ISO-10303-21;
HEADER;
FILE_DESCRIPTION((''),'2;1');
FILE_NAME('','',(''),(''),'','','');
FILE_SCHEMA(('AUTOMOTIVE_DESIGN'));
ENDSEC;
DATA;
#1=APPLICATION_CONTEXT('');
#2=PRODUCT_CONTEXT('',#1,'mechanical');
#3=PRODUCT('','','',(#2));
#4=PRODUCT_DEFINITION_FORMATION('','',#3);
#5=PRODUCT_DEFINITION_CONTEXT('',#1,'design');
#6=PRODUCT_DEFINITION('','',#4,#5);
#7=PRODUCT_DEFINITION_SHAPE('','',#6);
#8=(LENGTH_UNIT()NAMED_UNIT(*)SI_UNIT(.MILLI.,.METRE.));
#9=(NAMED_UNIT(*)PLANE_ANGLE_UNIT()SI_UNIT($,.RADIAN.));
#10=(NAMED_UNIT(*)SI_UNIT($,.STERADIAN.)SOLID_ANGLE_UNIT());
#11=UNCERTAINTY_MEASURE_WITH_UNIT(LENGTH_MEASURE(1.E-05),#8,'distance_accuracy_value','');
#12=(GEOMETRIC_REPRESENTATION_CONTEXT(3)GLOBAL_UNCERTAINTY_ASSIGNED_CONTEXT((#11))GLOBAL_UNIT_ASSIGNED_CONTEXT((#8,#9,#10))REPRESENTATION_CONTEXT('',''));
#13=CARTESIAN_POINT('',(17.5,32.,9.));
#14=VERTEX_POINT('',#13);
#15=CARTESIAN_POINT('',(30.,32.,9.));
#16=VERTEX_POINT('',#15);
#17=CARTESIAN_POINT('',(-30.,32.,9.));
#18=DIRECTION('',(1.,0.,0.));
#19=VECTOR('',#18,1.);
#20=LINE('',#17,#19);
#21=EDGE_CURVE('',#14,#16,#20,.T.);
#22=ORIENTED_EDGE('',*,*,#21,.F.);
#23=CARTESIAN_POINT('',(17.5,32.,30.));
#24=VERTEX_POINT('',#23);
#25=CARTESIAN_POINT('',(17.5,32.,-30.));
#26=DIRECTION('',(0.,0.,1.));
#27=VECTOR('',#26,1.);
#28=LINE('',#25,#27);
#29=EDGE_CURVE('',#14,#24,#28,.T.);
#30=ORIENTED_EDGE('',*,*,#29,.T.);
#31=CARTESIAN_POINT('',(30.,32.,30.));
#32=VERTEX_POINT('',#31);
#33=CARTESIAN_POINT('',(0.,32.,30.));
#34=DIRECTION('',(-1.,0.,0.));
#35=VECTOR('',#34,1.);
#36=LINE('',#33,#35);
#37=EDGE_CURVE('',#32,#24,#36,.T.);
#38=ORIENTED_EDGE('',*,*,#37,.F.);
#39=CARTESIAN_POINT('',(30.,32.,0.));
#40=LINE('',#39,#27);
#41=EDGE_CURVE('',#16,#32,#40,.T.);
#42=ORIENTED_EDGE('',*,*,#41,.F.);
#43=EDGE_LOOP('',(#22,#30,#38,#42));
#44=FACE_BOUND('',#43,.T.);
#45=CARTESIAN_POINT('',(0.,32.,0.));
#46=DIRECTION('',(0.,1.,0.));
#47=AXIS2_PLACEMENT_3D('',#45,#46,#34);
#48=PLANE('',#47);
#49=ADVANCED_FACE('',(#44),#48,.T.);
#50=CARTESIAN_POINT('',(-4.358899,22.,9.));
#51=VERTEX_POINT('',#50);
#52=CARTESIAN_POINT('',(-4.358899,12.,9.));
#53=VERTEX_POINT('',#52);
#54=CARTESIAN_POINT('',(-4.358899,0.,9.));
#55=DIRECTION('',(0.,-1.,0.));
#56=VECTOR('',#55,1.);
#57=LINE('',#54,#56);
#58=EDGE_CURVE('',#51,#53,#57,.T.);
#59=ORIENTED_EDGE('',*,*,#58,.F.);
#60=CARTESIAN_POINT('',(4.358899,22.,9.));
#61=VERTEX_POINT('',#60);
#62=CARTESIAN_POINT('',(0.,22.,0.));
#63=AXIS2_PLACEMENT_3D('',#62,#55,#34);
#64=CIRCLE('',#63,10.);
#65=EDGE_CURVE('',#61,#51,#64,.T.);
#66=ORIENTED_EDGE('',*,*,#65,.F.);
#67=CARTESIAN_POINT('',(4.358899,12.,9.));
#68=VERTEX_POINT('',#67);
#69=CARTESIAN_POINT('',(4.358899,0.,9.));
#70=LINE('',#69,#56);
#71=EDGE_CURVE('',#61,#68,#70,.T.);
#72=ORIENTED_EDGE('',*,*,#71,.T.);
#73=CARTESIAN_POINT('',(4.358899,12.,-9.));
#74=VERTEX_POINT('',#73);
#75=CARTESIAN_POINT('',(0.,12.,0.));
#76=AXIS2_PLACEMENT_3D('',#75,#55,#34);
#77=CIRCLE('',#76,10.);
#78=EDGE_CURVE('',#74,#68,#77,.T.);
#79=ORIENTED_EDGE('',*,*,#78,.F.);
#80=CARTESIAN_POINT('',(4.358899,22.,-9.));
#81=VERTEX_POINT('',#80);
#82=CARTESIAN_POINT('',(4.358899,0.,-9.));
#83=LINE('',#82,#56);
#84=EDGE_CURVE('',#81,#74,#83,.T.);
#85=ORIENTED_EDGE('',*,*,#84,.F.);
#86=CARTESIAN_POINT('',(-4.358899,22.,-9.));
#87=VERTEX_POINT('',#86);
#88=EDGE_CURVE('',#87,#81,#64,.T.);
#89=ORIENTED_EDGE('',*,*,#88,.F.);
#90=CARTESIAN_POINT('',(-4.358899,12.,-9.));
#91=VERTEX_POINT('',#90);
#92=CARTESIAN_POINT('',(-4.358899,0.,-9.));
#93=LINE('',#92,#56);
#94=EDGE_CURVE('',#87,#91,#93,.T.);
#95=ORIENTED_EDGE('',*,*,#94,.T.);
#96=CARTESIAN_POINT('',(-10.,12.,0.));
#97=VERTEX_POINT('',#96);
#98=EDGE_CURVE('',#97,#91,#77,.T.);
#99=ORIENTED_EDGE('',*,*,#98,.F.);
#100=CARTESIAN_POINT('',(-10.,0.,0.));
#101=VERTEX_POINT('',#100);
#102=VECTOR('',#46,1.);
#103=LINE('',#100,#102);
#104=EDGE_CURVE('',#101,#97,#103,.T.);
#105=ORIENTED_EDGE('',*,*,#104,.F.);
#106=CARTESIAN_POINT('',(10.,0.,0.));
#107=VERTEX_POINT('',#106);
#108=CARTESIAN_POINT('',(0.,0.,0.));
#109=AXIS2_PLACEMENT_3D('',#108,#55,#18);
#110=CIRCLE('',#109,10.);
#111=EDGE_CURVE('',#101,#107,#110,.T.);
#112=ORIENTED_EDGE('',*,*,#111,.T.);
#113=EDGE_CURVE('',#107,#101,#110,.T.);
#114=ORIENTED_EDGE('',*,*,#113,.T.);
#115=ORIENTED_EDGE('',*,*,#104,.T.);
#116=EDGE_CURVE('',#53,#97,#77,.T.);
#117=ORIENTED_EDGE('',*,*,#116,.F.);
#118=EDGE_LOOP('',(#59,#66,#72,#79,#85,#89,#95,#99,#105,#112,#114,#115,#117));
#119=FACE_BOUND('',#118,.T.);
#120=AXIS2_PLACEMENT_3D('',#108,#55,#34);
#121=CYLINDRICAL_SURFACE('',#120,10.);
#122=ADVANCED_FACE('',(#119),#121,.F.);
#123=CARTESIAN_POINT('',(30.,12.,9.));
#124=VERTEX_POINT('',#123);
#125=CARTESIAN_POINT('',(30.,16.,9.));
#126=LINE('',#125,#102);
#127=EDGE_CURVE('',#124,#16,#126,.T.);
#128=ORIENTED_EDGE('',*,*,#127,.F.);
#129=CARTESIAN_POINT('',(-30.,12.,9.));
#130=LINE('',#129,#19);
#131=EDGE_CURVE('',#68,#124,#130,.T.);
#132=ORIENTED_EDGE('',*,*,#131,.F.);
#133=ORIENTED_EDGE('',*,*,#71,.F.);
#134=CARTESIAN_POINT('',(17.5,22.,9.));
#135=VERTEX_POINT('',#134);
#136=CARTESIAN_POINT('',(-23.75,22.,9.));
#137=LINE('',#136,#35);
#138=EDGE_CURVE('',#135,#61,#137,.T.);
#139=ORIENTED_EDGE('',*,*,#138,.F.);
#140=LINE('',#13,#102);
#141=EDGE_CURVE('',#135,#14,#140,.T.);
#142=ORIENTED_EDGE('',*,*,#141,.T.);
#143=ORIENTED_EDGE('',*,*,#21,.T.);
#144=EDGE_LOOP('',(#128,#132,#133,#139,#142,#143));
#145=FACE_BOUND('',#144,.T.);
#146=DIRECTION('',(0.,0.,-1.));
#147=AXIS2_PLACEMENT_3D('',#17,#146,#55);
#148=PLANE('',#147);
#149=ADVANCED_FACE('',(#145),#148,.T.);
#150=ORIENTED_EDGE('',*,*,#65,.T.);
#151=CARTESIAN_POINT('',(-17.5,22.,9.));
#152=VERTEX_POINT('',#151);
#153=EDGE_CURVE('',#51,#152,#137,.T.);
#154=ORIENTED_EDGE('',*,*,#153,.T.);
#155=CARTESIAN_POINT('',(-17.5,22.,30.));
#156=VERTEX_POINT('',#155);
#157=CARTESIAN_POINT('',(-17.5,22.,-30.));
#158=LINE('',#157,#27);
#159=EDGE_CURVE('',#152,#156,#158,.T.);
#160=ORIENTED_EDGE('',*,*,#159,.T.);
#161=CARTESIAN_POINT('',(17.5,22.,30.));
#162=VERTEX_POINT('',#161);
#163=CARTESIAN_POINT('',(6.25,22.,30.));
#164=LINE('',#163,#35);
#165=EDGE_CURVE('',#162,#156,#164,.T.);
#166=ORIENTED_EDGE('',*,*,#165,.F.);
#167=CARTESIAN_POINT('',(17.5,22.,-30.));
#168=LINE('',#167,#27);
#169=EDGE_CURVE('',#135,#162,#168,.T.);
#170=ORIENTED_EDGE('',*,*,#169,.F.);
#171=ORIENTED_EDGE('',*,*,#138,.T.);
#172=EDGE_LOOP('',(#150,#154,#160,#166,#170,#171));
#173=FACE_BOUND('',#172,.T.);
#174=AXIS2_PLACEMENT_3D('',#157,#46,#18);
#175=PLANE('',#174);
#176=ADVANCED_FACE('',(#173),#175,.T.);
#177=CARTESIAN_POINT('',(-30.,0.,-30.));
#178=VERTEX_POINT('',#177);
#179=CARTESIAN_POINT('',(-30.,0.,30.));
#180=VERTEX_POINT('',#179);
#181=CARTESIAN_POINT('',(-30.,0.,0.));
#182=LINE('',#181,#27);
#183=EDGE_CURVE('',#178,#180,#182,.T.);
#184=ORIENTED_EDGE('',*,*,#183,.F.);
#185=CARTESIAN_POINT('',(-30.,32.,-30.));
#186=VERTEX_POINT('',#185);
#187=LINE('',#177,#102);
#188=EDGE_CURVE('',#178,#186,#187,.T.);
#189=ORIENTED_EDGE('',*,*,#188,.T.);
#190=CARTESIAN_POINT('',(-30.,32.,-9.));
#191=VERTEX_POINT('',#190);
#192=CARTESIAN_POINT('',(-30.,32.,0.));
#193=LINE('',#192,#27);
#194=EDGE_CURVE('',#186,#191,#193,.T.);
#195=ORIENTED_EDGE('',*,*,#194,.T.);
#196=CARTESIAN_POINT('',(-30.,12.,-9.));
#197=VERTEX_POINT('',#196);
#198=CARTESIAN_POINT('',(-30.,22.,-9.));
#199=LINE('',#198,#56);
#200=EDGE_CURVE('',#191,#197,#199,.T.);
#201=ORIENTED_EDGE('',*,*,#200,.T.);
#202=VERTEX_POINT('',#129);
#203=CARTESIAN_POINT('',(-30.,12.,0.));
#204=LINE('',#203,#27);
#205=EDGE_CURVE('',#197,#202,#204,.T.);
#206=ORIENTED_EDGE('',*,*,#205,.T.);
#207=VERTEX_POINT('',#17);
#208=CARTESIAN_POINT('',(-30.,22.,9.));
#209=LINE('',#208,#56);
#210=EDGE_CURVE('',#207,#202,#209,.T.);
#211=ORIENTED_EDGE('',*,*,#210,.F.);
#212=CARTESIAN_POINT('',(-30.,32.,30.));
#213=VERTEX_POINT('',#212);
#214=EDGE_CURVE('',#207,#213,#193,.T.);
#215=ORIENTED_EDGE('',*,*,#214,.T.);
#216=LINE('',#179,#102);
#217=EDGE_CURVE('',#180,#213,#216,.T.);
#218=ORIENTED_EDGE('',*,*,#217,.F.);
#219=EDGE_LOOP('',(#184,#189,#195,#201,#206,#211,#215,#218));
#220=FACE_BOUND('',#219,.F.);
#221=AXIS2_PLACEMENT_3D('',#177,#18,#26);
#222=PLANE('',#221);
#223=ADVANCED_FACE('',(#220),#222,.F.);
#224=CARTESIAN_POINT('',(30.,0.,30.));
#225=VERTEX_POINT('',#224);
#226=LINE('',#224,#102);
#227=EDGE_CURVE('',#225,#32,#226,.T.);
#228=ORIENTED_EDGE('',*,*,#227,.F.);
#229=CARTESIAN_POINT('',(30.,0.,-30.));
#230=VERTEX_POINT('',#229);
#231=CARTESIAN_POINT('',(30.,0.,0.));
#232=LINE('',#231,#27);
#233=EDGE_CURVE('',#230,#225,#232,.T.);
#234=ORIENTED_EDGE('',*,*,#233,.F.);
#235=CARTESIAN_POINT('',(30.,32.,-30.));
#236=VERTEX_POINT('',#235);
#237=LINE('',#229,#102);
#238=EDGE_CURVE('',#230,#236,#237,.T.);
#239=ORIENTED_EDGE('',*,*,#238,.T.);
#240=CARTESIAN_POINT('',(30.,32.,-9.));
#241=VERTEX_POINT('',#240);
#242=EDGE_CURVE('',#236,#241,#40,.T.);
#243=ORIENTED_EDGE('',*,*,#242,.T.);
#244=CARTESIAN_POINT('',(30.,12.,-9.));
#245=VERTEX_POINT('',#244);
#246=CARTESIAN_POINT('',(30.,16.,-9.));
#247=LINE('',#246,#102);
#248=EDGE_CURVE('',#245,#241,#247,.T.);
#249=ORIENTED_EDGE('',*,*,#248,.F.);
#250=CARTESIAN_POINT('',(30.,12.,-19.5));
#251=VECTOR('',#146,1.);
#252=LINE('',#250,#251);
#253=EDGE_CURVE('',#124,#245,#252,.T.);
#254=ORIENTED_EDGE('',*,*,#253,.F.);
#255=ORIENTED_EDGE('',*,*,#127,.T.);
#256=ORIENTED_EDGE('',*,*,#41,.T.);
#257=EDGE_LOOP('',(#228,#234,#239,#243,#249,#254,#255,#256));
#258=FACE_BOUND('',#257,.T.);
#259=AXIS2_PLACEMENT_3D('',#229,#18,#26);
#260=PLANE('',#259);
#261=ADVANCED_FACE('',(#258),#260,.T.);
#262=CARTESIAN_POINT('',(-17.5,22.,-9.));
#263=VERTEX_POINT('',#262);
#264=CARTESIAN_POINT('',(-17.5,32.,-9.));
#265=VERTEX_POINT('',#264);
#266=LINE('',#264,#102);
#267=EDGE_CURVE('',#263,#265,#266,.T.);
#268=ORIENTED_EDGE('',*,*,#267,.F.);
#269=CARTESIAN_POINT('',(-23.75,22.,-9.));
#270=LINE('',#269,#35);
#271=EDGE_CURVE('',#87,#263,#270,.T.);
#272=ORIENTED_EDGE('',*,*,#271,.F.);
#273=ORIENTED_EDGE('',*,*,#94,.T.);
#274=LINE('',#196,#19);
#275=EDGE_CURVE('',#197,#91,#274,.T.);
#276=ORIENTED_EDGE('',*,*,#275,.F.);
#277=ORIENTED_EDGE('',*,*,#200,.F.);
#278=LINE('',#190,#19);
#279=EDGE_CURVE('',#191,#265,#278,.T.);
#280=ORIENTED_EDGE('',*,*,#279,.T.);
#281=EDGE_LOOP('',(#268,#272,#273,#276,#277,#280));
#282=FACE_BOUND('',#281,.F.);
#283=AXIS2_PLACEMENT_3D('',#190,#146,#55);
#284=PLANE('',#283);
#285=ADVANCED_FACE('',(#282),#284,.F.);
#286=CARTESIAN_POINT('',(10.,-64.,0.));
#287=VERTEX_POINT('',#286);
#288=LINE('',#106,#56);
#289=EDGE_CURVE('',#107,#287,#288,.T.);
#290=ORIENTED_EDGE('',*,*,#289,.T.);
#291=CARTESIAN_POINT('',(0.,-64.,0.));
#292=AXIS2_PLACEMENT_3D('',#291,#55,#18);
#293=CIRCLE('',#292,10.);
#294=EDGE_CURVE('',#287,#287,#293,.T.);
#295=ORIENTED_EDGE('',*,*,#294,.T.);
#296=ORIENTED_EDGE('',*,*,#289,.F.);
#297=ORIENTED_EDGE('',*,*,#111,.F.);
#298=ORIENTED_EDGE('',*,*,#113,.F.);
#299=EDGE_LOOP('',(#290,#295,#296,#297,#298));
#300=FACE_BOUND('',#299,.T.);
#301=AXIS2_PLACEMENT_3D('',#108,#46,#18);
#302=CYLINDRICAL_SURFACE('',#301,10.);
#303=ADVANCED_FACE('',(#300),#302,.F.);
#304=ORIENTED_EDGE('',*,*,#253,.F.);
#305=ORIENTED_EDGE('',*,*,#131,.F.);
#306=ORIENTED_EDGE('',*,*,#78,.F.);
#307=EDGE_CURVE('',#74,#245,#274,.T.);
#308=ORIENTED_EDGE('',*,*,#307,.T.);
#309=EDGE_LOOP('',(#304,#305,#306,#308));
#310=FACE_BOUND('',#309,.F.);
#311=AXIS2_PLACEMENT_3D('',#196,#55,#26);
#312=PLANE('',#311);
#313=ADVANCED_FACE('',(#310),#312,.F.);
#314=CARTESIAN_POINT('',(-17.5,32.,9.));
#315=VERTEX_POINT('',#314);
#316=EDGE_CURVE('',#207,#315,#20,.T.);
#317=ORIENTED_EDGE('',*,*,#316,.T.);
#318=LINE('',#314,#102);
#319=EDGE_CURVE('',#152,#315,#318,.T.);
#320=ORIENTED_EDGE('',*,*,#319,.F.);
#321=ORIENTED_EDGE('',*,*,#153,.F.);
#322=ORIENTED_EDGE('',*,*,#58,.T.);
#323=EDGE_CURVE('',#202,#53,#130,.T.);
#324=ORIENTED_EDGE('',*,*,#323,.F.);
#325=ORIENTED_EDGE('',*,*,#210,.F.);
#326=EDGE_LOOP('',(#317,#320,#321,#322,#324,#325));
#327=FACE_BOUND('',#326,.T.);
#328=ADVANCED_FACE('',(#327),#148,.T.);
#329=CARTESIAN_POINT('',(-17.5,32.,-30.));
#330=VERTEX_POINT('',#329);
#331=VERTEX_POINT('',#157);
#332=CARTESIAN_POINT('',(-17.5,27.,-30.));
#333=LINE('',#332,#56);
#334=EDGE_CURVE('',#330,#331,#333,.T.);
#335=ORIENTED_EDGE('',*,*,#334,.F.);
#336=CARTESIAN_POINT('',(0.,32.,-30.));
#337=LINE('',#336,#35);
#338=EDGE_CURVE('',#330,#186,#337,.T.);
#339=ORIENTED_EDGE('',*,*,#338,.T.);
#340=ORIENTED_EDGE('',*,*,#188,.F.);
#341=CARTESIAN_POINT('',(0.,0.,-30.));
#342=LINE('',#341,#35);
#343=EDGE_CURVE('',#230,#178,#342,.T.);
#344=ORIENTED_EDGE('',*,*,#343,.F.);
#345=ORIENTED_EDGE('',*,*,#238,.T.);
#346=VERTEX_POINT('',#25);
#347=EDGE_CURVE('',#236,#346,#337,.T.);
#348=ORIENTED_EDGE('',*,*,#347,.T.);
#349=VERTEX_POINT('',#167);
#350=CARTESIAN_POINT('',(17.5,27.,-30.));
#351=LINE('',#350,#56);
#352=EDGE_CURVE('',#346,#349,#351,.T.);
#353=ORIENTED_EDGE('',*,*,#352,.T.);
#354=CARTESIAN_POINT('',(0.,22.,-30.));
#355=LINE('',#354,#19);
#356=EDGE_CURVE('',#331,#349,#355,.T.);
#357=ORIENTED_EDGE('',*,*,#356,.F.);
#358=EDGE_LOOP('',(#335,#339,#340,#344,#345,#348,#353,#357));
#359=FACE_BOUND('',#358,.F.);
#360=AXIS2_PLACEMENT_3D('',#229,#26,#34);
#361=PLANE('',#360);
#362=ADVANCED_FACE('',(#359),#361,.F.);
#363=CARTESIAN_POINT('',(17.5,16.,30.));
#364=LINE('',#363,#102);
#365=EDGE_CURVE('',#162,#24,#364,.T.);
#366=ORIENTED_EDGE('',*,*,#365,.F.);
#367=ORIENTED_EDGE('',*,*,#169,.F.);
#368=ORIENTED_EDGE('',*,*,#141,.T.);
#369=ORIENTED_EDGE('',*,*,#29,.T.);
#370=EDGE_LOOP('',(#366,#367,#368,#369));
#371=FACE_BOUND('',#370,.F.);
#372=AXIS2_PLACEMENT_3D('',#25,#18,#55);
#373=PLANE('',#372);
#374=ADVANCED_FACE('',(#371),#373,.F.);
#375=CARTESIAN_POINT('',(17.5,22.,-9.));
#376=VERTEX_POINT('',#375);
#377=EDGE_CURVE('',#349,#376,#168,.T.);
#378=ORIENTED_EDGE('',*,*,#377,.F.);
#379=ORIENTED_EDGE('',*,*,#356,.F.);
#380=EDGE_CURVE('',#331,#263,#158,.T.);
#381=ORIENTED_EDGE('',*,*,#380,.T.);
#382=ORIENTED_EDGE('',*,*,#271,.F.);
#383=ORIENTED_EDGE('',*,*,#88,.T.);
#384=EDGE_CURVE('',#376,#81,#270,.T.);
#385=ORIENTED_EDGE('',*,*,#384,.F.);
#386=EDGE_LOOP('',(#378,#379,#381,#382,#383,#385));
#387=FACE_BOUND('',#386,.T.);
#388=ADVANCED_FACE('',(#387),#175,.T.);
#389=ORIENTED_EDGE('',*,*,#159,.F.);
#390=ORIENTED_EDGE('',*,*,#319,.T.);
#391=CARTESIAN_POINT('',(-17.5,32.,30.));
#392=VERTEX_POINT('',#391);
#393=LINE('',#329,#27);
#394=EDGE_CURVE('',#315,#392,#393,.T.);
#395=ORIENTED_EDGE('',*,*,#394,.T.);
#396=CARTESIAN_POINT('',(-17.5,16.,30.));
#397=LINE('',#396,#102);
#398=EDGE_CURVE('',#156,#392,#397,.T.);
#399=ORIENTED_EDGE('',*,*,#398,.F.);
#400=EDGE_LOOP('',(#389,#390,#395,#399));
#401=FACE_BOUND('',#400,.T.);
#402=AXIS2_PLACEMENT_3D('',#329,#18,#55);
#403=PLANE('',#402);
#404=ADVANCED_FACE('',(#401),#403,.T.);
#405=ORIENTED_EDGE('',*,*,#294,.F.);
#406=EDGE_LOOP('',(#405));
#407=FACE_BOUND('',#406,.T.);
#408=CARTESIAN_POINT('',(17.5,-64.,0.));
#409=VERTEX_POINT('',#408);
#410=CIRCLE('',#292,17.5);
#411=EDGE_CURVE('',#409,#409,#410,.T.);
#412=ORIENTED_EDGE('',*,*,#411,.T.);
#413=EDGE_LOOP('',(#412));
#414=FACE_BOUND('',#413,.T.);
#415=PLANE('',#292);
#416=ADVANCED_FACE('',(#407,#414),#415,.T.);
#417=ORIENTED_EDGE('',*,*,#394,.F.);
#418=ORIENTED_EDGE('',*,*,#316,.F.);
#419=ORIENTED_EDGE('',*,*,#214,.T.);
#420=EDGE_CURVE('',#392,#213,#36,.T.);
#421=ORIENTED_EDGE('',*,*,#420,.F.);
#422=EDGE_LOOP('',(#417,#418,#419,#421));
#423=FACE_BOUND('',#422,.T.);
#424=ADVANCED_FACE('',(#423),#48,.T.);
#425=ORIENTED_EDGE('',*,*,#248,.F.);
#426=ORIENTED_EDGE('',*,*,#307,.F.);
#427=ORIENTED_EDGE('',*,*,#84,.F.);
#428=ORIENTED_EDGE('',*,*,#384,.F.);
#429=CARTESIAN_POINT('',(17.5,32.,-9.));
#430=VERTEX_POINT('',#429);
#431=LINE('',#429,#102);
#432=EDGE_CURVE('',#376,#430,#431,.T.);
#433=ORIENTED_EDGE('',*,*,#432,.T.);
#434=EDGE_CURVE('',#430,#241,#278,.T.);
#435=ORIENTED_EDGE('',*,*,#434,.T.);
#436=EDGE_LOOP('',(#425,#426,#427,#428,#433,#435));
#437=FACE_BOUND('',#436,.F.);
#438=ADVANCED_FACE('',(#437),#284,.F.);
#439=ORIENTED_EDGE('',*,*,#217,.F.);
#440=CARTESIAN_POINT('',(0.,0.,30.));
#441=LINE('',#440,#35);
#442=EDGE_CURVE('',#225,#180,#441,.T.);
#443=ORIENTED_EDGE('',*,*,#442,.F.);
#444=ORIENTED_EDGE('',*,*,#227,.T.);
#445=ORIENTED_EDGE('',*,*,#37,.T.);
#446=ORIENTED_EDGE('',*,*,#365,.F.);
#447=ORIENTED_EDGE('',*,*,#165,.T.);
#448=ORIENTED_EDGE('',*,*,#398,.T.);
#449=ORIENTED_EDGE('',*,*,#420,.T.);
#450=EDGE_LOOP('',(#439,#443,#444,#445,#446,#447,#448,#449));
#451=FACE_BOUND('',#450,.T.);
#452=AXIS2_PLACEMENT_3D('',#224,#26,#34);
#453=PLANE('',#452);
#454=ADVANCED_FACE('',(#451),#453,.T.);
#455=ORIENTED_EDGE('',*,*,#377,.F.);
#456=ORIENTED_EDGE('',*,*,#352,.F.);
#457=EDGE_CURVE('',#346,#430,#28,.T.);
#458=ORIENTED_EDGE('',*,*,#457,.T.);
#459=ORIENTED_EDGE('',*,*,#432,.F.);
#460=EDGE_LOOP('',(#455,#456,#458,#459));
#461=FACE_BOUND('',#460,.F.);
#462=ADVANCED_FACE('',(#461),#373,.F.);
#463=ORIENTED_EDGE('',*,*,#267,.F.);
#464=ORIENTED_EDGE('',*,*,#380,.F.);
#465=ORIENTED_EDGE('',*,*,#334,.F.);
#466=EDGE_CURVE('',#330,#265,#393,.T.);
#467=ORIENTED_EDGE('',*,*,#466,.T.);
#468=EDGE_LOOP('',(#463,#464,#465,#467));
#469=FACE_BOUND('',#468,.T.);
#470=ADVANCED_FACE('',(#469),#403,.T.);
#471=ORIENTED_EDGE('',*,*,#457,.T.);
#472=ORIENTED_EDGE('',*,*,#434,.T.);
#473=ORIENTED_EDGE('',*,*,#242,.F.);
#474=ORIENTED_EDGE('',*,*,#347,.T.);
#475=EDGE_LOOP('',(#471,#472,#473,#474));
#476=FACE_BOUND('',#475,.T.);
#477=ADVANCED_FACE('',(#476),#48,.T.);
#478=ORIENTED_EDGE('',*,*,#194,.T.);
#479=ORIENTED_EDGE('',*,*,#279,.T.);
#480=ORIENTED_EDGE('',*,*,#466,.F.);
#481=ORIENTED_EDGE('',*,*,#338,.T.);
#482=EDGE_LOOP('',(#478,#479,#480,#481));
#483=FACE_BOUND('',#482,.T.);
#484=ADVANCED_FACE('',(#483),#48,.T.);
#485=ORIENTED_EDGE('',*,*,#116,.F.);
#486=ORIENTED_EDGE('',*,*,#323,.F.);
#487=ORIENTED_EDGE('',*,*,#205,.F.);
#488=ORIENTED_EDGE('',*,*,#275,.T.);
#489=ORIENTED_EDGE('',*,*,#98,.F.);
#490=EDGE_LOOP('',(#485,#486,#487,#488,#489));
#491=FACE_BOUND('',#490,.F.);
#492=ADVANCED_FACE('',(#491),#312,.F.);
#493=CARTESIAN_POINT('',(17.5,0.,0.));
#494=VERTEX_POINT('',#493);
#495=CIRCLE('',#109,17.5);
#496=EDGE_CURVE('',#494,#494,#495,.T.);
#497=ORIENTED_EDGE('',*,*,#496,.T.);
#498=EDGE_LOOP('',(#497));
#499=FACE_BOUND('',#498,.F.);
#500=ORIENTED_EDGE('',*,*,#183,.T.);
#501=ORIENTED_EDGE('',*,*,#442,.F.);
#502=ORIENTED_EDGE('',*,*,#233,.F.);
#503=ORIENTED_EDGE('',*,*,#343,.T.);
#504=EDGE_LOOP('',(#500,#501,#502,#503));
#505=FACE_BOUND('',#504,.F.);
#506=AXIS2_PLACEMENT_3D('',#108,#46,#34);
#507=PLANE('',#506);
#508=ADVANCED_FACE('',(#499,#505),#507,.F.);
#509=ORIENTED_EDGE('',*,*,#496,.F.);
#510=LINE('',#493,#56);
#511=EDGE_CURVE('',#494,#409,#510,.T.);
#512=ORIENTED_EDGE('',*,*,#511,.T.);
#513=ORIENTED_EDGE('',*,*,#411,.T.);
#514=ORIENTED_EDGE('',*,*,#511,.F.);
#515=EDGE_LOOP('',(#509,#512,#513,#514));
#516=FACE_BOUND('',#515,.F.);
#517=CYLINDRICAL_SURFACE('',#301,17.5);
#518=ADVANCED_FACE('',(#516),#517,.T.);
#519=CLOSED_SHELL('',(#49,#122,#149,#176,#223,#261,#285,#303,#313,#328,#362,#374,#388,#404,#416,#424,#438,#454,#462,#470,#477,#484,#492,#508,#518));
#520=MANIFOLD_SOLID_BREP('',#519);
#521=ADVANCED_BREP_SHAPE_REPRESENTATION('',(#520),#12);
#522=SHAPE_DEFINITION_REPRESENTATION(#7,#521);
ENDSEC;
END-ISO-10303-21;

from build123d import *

# Parameters (mm, degrees)
F0_R     = 17.5
F0_R_2   = 10
F1_DEPTH = 64
F2_W     = 60
F2_H     = 60
F2_R     = 17.5
F2_R_2   = 10
F3_DEPTH = 32
F4_W     = 35
F4_H     = 10
F5_DEPTH = 60.001
F6_W     = 20
F6_H     = 18
F7_DEPTH = 60.001


with BuildPart() as f1:
    # F0 (on Front) → F1 (new body)
    with BuildSketch(Plane.XZ):
        Circle(F0_R)
        Circle(F0_R_2, mode=Mode.SUBTRACT)
    extrude(amount=F1_DEPTH)

    # F2 (on face) → F3 (join)
    with BuildSketch(Plane(origin=(0, 0, 0), x_dir=(-1, 0, 0), z_dir=(0, 1, 0))):
        Rectangle(F2_W, F2_H)
        Circle(F2_R, mode=Mode.SUBTRACT)
        Circle(F2_R)
        Circle(F2_R_2, mode=Mode.SUBTRACT)
    extrude(amount=F3_DEPTH)

    # F4 (on face) → F5 (cut, through all)
    with BuildSketch(Plane(origin=(0, 0, -30), x_dir=(1, 0, 0), z_dir=(0, 0, -1))):
        with Locations((0, -27)):
            Rectangle(F4_W, F4_H)
    extrude(amount=-F5_DEPTH, mode=Mode.SUBTRACT)

    # F6 (on face) → F7 (cut, through all)
    with BuildSketch(Plane(origin=(-30, 0, 0), x_dir=(0, -1, 0), z_dir=(-1, 0, 0))):
        with Locations((-22, 0)):
            Rectangle(F6_W, F6_H)
    extrude(amount=-F7_DEPTH, mode=Mode.SUBTRACT)


solid = f1.part
